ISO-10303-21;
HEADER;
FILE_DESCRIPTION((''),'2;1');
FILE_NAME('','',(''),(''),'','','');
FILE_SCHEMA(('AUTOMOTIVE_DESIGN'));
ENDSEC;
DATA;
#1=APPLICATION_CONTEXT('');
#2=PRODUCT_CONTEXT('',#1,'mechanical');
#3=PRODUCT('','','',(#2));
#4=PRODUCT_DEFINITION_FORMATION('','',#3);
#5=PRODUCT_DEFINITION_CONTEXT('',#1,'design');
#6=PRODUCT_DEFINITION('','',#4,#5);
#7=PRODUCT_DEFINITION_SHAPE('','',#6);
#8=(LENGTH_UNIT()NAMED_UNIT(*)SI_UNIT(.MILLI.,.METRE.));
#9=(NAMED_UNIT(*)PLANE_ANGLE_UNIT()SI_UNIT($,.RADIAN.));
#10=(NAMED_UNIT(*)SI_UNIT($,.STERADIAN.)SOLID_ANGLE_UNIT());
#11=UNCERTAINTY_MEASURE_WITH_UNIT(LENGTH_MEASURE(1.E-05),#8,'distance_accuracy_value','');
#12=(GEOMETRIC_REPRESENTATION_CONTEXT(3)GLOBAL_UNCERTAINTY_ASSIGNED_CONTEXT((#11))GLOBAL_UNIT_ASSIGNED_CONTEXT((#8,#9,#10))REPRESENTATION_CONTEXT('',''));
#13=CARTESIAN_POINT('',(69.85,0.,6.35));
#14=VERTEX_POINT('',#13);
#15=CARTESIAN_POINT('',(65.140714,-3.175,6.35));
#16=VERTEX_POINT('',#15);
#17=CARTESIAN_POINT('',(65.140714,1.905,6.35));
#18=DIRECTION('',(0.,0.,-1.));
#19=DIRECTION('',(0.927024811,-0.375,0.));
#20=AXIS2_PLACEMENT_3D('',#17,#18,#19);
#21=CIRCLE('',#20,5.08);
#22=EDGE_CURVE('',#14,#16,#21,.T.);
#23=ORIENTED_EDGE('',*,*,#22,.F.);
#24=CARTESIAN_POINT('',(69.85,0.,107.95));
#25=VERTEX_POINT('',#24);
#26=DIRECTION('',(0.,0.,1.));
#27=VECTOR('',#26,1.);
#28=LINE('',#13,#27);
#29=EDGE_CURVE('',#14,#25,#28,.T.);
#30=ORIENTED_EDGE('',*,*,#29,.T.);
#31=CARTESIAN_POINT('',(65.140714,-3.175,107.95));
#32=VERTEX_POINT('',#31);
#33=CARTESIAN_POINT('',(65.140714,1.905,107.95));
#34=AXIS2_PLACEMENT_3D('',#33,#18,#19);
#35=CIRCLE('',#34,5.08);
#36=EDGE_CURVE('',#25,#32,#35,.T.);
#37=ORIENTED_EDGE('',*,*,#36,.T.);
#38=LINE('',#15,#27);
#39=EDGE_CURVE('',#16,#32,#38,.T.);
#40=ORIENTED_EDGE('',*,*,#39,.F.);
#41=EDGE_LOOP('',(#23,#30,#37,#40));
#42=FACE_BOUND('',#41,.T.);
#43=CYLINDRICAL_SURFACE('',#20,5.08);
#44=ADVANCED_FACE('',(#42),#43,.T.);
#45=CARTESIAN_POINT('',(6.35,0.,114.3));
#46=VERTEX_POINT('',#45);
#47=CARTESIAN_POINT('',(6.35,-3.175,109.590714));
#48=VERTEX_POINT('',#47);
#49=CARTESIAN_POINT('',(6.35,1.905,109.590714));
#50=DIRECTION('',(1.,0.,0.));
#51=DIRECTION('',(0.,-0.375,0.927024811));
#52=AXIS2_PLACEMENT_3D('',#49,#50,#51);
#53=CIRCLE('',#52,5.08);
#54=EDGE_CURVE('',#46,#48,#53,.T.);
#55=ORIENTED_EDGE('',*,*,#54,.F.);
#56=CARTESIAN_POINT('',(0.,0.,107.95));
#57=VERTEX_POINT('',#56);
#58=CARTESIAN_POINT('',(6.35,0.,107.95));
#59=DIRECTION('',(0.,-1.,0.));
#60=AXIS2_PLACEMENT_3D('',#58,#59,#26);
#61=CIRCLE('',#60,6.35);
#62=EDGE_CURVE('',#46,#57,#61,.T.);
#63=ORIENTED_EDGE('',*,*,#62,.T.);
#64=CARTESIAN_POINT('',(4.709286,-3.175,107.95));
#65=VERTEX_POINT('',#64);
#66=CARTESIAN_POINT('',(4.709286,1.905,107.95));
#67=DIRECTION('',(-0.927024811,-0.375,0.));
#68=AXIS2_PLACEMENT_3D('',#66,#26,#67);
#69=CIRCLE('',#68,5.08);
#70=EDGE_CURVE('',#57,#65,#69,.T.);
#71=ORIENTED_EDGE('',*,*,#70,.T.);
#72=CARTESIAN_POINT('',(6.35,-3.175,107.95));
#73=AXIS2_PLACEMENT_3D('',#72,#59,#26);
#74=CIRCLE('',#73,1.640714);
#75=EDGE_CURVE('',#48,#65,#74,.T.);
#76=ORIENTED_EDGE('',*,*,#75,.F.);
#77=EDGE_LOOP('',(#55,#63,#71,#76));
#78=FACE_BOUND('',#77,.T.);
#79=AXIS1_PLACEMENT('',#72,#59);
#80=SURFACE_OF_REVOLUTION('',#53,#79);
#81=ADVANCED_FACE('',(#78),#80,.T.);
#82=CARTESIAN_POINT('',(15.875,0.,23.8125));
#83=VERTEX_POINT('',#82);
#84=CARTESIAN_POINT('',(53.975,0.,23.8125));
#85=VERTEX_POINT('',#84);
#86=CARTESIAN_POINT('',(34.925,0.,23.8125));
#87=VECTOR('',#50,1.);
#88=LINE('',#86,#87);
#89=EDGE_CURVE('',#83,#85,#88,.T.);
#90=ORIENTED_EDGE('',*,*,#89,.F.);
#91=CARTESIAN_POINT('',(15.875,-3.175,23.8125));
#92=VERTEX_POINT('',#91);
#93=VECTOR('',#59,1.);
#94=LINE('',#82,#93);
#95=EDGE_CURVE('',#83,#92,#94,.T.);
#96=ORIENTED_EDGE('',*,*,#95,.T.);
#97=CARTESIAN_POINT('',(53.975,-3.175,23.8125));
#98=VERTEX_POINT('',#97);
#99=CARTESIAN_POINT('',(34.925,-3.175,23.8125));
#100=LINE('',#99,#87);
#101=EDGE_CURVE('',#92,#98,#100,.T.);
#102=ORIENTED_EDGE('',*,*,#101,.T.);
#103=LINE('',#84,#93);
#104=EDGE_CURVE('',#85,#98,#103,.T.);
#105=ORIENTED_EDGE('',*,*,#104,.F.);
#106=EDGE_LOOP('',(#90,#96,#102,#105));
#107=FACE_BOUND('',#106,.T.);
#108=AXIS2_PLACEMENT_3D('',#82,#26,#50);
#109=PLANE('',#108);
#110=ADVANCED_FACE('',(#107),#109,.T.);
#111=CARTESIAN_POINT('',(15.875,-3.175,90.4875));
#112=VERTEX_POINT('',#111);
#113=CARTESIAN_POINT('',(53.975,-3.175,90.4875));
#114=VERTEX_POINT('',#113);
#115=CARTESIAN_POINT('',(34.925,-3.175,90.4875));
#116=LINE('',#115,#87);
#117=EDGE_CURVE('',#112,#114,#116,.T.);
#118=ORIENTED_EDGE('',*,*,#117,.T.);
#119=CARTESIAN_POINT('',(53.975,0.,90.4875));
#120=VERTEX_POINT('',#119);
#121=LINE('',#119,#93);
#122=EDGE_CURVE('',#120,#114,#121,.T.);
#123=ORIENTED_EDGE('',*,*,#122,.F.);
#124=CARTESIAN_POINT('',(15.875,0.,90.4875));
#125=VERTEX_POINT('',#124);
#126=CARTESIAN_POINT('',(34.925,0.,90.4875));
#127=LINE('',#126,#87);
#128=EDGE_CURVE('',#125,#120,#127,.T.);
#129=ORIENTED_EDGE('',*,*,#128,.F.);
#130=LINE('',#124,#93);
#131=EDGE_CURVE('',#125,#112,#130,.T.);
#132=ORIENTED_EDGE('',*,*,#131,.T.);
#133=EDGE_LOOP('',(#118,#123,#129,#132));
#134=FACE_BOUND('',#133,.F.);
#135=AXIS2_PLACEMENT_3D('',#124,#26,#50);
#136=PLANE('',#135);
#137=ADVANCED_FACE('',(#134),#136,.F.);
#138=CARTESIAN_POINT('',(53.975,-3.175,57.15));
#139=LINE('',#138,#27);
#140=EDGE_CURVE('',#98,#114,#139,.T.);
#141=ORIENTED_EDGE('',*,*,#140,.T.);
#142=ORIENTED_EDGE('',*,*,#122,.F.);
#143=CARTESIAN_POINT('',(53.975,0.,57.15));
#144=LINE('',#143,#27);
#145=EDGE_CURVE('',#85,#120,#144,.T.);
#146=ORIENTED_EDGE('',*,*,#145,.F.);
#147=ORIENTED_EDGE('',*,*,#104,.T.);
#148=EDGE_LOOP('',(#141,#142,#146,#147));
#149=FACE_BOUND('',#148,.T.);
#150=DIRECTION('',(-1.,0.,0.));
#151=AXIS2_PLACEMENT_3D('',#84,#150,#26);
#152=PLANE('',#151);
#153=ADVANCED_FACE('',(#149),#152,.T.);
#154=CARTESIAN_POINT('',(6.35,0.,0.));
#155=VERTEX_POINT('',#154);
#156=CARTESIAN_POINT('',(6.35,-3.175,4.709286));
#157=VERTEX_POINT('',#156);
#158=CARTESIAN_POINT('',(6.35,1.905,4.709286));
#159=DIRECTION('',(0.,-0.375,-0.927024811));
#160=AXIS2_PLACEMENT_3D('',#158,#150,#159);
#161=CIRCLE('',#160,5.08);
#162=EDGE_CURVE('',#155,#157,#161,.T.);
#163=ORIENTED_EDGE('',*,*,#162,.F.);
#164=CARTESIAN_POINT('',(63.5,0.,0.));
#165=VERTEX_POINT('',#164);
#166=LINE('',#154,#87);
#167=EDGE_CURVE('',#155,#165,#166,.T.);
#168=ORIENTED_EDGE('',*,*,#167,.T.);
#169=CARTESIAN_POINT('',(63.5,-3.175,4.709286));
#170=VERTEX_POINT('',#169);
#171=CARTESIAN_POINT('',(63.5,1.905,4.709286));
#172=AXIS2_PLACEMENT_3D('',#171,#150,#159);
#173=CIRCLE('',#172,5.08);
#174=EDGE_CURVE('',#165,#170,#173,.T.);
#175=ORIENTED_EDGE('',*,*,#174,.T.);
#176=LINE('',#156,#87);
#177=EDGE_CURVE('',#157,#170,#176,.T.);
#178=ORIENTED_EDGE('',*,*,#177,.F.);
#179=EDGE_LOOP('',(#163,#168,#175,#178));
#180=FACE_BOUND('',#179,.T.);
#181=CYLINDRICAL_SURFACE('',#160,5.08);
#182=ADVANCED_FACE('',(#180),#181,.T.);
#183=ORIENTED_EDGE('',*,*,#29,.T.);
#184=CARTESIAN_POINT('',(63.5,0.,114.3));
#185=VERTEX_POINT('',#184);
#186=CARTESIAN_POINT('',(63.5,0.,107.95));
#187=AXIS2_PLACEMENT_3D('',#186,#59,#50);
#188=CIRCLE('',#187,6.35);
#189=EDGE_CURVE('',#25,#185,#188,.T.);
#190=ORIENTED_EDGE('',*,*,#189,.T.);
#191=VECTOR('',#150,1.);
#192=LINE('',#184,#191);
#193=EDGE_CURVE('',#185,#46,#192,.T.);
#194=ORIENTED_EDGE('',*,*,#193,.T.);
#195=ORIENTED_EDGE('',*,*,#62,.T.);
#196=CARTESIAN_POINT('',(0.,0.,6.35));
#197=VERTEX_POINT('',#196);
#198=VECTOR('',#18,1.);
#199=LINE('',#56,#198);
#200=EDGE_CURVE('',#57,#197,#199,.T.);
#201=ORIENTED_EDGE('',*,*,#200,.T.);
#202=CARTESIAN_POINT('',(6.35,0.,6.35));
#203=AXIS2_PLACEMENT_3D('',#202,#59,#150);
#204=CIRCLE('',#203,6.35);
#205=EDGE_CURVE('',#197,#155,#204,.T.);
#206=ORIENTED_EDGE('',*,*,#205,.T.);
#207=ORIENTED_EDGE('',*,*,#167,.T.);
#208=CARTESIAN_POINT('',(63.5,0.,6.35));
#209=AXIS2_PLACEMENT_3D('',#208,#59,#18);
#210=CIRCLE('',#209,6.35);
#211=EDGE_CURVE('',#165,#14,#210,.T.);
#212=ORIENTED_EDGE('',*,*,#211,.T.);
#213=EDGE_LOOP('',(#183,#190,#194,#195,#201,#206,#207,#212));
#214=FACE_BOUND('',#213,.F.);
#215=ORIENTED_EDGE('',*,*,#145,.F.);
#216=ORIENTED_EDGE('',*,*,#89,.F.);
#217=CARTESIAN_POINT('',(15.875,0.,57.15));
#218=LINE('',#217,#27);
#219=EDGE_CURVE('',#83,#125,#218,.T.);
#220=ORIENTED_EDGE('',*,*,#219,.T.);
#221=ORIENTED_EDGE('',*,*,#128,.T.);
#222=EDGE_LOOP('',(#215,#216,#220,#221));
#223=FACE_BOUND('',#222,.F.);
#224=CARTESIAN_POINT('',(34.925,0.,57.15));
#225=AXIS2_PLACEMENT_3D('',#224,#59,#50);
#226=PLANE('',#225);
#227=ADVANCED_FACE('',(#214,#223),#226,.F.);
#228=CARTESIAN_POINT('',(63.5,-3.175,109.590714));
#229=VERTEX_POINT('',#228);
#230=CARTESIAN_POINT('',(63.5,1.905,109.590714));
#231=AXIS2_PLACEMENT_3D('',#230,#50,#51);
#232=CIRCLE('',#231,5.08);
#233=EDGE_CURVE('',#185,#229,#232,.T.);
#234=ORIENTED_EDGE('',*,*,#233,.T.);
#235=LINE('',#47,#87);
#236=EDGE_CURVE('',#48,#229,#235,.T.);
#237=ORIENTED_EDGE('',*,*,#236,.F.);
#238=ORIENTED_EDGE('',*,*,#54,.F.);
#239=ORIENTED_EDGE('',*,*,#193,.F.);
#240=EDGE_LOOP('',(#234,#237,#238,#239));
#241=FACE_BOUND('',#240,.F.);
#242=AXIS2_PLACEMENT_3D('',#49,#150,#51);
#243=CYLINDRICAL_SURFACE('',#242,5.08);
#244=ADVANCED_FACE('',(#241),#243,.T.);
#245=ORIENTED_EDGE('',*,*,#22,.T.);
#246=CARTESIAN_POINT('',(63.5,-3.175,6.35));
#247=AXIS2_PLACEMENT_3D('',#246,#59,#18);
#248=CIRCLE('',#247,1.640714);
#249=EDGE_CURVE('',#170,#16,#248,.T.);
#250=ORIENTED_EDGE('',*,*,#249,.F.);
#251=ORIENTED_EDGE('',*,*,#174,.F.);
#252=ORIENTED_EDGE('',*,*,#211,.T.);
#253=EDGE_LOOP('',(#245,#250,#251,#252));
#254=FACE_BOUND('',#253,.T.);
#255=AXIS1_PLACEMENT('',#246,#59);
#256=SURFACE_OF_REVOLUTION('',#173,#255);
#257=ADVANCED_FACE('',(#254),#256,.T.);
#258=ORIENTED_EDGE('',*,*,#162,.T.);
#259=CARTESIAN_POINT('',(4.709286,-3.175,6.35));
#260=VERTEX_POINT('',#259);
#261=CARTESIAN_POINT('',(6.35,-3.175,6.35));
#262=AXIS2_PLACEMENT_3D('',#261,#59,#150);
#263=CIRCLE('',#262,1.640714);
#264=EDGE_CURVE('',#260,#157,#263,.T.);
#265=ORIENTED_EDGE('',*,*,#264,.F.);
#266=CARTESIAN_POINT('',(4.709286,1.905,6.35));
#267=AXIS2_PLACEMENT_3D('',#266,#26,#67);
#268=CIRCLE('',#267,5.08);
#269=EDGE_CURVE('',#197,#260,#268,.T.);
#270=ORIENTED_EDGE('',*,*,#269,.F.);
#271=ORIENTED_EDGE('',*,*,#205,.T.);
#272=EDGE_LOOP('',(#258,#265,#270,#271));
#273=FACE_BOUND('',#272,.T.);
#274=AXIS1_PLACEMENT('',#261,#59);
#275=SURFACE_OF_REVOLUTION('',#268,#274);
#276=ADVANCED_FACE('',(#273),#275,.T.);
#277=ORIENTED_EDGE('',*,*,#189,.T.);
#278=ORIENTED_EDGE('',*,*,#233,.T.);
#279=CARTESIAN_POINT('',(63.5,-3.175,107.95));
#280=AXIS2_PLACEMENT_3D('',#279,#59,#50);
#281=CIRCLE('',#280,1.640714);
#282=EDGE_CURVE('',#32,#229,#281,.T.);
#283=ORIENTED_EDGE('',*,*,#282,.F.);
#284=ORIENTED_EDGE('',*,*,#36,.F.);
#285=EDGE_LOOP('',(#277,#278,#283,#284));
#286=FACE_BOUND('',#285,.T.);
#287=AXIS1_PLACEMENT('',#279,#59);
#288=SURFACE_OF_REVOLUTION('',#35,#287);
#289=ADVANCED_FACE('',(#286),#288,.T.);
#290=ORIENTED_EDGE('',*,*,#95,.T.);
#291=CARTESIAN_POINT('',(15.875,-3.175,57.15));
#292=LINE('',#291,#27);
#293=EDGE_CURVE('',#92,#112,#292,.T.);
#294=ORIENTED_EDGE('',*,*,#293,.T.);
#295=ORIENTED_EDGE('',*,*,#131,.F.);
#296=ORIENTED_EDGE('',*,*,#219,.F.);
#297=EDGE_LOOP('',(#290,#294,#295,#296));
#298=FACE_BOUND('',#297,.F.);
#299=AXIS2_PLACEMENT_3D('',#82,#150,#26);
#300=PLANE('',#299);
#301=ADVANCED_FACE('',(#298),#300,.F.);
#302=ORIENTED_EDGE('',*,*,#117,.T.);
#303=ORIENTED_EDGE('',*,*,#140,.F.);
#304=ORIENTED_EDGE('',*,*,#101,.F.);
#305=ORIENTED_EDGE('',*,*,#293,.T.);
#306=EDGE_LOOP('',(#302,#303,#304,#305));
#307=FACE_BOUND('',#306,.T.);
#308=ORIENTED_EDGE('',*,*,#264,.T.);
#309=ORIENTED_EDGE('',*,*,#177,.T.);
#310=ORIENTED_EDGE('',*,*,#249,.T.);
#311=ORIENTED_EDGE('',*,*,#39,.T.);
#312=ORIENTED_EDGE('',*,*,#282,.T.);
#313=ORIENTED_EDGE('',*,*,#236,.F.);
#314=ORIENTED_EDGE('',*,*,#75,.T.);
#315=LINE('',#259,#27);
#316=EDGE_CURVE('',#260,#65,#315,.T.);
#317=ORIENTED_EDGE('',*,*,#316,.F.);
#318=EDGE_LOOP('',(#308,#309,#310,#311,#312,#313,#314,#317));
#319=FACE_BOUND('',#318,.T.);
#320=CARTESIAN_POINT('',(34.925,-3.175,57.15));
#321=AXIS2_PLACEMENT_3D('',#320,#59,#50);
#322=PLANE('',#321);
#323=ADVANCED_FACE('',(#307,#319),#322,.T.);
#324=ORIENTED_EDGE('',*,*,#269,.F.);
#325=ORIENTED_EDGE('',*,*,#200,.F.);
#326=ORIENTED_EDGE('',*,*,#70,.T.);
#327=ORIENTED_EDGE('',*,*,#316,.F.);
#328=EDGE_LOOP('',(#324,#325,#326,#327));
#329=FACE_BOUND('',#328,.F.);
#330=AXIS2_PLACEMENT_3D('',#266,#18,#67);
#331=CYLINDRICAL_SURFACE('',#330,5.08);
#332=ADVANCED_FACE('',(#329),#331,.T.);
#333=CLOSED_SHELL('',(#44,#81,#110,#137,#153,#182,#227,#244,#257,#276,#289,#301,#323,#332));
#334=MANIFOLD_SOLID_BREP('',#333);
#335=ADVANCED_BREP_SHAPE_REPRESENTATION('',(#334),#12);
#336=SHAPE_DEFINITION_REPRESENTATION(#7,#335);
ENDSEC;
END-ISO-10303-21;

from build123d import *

# Parameters (mm, degrees)
F0_W         = 38.1
F0_H         = 66.675
F1_DEPTH     = 3.175
F2_T1_DEPTH  = 57.15
F2_T3_DEPTH  = 101.6
F2_T6_ANGLE  = 90
F2_T8_ANGLE  = 90
F2_T10_ANGLE = 90
F2_T12_ANGLE = 90


# Not quite as in the source:
# - a fillet or chamfer that OpenCascade refuses, or shapes differently, is made with other operations: its cross-section is extruded or revolved along the edge and cut away or added


with BuildPart() as f1:
    # F0 (on Front) → F1 (new body)
    with BuildSketch(Plane.XZ):
        with BuildLine():
            ThreePointArc((0, 6.35), (1.8598719395, 1.8598719395), (6.35, 0))
            Line((6.35, 0), (63.5, 0))
            ThreePointArc((63.5, 0), (67.9901280605, 1.8598719395), (69.85, 6.35))
            Line((69.85, 6.35), (69.85, 107.95))
            ThreePointArc((69.85, 107.95), (67.9901280605, 112.4401280605), (63.5, 114.3))
            Line((63.5, 114.3), (6.35, 114.3))
            ThreePointArc((6.35, 114.3), (1.8598719395, 112.4401280605), (0, 107.95))
            Line((0, 107.95), (0, 6.35))
        make_face()
        with Locations((34.925, 57.15)):
            Rectangle(F0_W, F0_H, mode=Mode.SUBTRACT)
    extrude(amount=F1_DEPTH)

    # F2: fillet of radius 5.08 on 1 edges, made by hand

    # F2_s2 → F2_t1 (cut)
    with BuildSketch(Plane.YZ.offset(6.35)):
        with BuildLine():
            ThreePointArc((0, 114.3), (-2.3071134838, 112.4305202921), (-3.175, 109.5907139607))
            Line((-3.175, 109.5907139607), (-3.175, 114.3))
            Line((-3.175, 114.3), (0, 114.3))
        make_face()
        with BuildLine():
            ThreePointArc((0, 0), (-2.3071134838, 1.8694797079), (-3.175, 4.7092860393))
            Line((-3.175, 4.7092860393), (-3.175, 0))
            Line((-3.175, 0), (0, 0))
        make_face()
    extrude(amount=F2_T1_DEPTH, mode=Mode.SUBTRACT)

    # F2_s4 → F2_t3 (cut)
    with BuildSketch(Plane.XY.offset(6.35)):
        with BuildLine():
            ThreePointArc((0, 0), (1.8694797079, -2.3071134838), (4.7092860393, -3.175))
            Line((4.7092860393, -3.175), (0, -3.175))
            Line((0, -3.175), (0, 0))
        make_face()
        with BuildLine():
            ThreePointArc((69.85, 0), (67.9805202921, -2.3071134838), (65.1407139607, -3.175))
            Line((65.1407139607, -3.175), (69.85, -3.175))
            Line((69.85, -3.175), (69.85, 0))
        make_face()
    extrude(amount=F2_T3_DEPTH, mode=Mode.SUBTRACT)

    # F2_s5 → F2_t6 (revolve, cut)
    with BuildSketch(Plane.XY.offset(107.95)):
        with BuildLine():
            ThreePointArc((69.85, 0), (67.9805202921, -2.3071134838), (65.1407139607, -3.175))
            Line((65.1407139607, -3.175), (69.85, -3.175))
            Line((69.85, -3.175), (69.85, 0))
        make_face()
    revolve(axis=Axis((63.5, -3.175, 107.95), (0, -1, 0)), revolution_arc=F2_T6_ANGLE, mode=Mode.SUBTRACT)

    # F2_s7 → F2_t8 (revolve, cut)
    with BuildSketch(Plane.YZ.offset(6.35)):
        with BuildLine():
            ThreePointArc((0, 114.3), (-2.3071134838, 112.4305202921), (-3.175, 109.5907139607))
            Line((-3.175, 109.5907139607), (-3.175, 114.3))
            Line((-3.175, 114.3), (0, 114.3))
        make_face()
    revolve(axis=Axis((6.35, -3.175, 107.95), (0, -1, 0)), revolution_arc=F2_T8_ANGLE, mode=Mode.SUBTRACT)

    # F2_s9 → F2_t10 (revolve, cut)
    with BuildSketch(Plane.XY.offset(6.35)):
        with BuildLine():
            ThreePointArc((0, 0), (1.8694797079, -2.3071134838), (4.7092860393, -3.175))
            Line((4.7092860393, -3.175), (0, -3.175))
            Line((0, -3.175), (0, 0))
        make_face()
    revolve(axis=Axis((6.35, -3.175, 6.35), (0, -1, 0)), revolution_arc=F2_T10_ANGLE, mode=Mode.SUBTRACT)

    # F2_s11 → F2_t12 (revolve, cut)
    with BuildSketch(Plane.YZ.offset(63.5)):
        with BuildLine():
            ThreePointArc((0, 0), (-2.3071134838, 1.8694797079), (-3.175, 4.7092860393))
            Line((-3.175, 4.7092860393), (-3.175, 0))
            Line((-3.175, 0), (0, 0))
        make_face()
    revolve(axis=Axis((63.5, -3.175, 6.35), (0, -1, 0)), revolution_arc=F2_T12_ANGLE, mode=Mode.SUBTRACT)


solid = f1.part
